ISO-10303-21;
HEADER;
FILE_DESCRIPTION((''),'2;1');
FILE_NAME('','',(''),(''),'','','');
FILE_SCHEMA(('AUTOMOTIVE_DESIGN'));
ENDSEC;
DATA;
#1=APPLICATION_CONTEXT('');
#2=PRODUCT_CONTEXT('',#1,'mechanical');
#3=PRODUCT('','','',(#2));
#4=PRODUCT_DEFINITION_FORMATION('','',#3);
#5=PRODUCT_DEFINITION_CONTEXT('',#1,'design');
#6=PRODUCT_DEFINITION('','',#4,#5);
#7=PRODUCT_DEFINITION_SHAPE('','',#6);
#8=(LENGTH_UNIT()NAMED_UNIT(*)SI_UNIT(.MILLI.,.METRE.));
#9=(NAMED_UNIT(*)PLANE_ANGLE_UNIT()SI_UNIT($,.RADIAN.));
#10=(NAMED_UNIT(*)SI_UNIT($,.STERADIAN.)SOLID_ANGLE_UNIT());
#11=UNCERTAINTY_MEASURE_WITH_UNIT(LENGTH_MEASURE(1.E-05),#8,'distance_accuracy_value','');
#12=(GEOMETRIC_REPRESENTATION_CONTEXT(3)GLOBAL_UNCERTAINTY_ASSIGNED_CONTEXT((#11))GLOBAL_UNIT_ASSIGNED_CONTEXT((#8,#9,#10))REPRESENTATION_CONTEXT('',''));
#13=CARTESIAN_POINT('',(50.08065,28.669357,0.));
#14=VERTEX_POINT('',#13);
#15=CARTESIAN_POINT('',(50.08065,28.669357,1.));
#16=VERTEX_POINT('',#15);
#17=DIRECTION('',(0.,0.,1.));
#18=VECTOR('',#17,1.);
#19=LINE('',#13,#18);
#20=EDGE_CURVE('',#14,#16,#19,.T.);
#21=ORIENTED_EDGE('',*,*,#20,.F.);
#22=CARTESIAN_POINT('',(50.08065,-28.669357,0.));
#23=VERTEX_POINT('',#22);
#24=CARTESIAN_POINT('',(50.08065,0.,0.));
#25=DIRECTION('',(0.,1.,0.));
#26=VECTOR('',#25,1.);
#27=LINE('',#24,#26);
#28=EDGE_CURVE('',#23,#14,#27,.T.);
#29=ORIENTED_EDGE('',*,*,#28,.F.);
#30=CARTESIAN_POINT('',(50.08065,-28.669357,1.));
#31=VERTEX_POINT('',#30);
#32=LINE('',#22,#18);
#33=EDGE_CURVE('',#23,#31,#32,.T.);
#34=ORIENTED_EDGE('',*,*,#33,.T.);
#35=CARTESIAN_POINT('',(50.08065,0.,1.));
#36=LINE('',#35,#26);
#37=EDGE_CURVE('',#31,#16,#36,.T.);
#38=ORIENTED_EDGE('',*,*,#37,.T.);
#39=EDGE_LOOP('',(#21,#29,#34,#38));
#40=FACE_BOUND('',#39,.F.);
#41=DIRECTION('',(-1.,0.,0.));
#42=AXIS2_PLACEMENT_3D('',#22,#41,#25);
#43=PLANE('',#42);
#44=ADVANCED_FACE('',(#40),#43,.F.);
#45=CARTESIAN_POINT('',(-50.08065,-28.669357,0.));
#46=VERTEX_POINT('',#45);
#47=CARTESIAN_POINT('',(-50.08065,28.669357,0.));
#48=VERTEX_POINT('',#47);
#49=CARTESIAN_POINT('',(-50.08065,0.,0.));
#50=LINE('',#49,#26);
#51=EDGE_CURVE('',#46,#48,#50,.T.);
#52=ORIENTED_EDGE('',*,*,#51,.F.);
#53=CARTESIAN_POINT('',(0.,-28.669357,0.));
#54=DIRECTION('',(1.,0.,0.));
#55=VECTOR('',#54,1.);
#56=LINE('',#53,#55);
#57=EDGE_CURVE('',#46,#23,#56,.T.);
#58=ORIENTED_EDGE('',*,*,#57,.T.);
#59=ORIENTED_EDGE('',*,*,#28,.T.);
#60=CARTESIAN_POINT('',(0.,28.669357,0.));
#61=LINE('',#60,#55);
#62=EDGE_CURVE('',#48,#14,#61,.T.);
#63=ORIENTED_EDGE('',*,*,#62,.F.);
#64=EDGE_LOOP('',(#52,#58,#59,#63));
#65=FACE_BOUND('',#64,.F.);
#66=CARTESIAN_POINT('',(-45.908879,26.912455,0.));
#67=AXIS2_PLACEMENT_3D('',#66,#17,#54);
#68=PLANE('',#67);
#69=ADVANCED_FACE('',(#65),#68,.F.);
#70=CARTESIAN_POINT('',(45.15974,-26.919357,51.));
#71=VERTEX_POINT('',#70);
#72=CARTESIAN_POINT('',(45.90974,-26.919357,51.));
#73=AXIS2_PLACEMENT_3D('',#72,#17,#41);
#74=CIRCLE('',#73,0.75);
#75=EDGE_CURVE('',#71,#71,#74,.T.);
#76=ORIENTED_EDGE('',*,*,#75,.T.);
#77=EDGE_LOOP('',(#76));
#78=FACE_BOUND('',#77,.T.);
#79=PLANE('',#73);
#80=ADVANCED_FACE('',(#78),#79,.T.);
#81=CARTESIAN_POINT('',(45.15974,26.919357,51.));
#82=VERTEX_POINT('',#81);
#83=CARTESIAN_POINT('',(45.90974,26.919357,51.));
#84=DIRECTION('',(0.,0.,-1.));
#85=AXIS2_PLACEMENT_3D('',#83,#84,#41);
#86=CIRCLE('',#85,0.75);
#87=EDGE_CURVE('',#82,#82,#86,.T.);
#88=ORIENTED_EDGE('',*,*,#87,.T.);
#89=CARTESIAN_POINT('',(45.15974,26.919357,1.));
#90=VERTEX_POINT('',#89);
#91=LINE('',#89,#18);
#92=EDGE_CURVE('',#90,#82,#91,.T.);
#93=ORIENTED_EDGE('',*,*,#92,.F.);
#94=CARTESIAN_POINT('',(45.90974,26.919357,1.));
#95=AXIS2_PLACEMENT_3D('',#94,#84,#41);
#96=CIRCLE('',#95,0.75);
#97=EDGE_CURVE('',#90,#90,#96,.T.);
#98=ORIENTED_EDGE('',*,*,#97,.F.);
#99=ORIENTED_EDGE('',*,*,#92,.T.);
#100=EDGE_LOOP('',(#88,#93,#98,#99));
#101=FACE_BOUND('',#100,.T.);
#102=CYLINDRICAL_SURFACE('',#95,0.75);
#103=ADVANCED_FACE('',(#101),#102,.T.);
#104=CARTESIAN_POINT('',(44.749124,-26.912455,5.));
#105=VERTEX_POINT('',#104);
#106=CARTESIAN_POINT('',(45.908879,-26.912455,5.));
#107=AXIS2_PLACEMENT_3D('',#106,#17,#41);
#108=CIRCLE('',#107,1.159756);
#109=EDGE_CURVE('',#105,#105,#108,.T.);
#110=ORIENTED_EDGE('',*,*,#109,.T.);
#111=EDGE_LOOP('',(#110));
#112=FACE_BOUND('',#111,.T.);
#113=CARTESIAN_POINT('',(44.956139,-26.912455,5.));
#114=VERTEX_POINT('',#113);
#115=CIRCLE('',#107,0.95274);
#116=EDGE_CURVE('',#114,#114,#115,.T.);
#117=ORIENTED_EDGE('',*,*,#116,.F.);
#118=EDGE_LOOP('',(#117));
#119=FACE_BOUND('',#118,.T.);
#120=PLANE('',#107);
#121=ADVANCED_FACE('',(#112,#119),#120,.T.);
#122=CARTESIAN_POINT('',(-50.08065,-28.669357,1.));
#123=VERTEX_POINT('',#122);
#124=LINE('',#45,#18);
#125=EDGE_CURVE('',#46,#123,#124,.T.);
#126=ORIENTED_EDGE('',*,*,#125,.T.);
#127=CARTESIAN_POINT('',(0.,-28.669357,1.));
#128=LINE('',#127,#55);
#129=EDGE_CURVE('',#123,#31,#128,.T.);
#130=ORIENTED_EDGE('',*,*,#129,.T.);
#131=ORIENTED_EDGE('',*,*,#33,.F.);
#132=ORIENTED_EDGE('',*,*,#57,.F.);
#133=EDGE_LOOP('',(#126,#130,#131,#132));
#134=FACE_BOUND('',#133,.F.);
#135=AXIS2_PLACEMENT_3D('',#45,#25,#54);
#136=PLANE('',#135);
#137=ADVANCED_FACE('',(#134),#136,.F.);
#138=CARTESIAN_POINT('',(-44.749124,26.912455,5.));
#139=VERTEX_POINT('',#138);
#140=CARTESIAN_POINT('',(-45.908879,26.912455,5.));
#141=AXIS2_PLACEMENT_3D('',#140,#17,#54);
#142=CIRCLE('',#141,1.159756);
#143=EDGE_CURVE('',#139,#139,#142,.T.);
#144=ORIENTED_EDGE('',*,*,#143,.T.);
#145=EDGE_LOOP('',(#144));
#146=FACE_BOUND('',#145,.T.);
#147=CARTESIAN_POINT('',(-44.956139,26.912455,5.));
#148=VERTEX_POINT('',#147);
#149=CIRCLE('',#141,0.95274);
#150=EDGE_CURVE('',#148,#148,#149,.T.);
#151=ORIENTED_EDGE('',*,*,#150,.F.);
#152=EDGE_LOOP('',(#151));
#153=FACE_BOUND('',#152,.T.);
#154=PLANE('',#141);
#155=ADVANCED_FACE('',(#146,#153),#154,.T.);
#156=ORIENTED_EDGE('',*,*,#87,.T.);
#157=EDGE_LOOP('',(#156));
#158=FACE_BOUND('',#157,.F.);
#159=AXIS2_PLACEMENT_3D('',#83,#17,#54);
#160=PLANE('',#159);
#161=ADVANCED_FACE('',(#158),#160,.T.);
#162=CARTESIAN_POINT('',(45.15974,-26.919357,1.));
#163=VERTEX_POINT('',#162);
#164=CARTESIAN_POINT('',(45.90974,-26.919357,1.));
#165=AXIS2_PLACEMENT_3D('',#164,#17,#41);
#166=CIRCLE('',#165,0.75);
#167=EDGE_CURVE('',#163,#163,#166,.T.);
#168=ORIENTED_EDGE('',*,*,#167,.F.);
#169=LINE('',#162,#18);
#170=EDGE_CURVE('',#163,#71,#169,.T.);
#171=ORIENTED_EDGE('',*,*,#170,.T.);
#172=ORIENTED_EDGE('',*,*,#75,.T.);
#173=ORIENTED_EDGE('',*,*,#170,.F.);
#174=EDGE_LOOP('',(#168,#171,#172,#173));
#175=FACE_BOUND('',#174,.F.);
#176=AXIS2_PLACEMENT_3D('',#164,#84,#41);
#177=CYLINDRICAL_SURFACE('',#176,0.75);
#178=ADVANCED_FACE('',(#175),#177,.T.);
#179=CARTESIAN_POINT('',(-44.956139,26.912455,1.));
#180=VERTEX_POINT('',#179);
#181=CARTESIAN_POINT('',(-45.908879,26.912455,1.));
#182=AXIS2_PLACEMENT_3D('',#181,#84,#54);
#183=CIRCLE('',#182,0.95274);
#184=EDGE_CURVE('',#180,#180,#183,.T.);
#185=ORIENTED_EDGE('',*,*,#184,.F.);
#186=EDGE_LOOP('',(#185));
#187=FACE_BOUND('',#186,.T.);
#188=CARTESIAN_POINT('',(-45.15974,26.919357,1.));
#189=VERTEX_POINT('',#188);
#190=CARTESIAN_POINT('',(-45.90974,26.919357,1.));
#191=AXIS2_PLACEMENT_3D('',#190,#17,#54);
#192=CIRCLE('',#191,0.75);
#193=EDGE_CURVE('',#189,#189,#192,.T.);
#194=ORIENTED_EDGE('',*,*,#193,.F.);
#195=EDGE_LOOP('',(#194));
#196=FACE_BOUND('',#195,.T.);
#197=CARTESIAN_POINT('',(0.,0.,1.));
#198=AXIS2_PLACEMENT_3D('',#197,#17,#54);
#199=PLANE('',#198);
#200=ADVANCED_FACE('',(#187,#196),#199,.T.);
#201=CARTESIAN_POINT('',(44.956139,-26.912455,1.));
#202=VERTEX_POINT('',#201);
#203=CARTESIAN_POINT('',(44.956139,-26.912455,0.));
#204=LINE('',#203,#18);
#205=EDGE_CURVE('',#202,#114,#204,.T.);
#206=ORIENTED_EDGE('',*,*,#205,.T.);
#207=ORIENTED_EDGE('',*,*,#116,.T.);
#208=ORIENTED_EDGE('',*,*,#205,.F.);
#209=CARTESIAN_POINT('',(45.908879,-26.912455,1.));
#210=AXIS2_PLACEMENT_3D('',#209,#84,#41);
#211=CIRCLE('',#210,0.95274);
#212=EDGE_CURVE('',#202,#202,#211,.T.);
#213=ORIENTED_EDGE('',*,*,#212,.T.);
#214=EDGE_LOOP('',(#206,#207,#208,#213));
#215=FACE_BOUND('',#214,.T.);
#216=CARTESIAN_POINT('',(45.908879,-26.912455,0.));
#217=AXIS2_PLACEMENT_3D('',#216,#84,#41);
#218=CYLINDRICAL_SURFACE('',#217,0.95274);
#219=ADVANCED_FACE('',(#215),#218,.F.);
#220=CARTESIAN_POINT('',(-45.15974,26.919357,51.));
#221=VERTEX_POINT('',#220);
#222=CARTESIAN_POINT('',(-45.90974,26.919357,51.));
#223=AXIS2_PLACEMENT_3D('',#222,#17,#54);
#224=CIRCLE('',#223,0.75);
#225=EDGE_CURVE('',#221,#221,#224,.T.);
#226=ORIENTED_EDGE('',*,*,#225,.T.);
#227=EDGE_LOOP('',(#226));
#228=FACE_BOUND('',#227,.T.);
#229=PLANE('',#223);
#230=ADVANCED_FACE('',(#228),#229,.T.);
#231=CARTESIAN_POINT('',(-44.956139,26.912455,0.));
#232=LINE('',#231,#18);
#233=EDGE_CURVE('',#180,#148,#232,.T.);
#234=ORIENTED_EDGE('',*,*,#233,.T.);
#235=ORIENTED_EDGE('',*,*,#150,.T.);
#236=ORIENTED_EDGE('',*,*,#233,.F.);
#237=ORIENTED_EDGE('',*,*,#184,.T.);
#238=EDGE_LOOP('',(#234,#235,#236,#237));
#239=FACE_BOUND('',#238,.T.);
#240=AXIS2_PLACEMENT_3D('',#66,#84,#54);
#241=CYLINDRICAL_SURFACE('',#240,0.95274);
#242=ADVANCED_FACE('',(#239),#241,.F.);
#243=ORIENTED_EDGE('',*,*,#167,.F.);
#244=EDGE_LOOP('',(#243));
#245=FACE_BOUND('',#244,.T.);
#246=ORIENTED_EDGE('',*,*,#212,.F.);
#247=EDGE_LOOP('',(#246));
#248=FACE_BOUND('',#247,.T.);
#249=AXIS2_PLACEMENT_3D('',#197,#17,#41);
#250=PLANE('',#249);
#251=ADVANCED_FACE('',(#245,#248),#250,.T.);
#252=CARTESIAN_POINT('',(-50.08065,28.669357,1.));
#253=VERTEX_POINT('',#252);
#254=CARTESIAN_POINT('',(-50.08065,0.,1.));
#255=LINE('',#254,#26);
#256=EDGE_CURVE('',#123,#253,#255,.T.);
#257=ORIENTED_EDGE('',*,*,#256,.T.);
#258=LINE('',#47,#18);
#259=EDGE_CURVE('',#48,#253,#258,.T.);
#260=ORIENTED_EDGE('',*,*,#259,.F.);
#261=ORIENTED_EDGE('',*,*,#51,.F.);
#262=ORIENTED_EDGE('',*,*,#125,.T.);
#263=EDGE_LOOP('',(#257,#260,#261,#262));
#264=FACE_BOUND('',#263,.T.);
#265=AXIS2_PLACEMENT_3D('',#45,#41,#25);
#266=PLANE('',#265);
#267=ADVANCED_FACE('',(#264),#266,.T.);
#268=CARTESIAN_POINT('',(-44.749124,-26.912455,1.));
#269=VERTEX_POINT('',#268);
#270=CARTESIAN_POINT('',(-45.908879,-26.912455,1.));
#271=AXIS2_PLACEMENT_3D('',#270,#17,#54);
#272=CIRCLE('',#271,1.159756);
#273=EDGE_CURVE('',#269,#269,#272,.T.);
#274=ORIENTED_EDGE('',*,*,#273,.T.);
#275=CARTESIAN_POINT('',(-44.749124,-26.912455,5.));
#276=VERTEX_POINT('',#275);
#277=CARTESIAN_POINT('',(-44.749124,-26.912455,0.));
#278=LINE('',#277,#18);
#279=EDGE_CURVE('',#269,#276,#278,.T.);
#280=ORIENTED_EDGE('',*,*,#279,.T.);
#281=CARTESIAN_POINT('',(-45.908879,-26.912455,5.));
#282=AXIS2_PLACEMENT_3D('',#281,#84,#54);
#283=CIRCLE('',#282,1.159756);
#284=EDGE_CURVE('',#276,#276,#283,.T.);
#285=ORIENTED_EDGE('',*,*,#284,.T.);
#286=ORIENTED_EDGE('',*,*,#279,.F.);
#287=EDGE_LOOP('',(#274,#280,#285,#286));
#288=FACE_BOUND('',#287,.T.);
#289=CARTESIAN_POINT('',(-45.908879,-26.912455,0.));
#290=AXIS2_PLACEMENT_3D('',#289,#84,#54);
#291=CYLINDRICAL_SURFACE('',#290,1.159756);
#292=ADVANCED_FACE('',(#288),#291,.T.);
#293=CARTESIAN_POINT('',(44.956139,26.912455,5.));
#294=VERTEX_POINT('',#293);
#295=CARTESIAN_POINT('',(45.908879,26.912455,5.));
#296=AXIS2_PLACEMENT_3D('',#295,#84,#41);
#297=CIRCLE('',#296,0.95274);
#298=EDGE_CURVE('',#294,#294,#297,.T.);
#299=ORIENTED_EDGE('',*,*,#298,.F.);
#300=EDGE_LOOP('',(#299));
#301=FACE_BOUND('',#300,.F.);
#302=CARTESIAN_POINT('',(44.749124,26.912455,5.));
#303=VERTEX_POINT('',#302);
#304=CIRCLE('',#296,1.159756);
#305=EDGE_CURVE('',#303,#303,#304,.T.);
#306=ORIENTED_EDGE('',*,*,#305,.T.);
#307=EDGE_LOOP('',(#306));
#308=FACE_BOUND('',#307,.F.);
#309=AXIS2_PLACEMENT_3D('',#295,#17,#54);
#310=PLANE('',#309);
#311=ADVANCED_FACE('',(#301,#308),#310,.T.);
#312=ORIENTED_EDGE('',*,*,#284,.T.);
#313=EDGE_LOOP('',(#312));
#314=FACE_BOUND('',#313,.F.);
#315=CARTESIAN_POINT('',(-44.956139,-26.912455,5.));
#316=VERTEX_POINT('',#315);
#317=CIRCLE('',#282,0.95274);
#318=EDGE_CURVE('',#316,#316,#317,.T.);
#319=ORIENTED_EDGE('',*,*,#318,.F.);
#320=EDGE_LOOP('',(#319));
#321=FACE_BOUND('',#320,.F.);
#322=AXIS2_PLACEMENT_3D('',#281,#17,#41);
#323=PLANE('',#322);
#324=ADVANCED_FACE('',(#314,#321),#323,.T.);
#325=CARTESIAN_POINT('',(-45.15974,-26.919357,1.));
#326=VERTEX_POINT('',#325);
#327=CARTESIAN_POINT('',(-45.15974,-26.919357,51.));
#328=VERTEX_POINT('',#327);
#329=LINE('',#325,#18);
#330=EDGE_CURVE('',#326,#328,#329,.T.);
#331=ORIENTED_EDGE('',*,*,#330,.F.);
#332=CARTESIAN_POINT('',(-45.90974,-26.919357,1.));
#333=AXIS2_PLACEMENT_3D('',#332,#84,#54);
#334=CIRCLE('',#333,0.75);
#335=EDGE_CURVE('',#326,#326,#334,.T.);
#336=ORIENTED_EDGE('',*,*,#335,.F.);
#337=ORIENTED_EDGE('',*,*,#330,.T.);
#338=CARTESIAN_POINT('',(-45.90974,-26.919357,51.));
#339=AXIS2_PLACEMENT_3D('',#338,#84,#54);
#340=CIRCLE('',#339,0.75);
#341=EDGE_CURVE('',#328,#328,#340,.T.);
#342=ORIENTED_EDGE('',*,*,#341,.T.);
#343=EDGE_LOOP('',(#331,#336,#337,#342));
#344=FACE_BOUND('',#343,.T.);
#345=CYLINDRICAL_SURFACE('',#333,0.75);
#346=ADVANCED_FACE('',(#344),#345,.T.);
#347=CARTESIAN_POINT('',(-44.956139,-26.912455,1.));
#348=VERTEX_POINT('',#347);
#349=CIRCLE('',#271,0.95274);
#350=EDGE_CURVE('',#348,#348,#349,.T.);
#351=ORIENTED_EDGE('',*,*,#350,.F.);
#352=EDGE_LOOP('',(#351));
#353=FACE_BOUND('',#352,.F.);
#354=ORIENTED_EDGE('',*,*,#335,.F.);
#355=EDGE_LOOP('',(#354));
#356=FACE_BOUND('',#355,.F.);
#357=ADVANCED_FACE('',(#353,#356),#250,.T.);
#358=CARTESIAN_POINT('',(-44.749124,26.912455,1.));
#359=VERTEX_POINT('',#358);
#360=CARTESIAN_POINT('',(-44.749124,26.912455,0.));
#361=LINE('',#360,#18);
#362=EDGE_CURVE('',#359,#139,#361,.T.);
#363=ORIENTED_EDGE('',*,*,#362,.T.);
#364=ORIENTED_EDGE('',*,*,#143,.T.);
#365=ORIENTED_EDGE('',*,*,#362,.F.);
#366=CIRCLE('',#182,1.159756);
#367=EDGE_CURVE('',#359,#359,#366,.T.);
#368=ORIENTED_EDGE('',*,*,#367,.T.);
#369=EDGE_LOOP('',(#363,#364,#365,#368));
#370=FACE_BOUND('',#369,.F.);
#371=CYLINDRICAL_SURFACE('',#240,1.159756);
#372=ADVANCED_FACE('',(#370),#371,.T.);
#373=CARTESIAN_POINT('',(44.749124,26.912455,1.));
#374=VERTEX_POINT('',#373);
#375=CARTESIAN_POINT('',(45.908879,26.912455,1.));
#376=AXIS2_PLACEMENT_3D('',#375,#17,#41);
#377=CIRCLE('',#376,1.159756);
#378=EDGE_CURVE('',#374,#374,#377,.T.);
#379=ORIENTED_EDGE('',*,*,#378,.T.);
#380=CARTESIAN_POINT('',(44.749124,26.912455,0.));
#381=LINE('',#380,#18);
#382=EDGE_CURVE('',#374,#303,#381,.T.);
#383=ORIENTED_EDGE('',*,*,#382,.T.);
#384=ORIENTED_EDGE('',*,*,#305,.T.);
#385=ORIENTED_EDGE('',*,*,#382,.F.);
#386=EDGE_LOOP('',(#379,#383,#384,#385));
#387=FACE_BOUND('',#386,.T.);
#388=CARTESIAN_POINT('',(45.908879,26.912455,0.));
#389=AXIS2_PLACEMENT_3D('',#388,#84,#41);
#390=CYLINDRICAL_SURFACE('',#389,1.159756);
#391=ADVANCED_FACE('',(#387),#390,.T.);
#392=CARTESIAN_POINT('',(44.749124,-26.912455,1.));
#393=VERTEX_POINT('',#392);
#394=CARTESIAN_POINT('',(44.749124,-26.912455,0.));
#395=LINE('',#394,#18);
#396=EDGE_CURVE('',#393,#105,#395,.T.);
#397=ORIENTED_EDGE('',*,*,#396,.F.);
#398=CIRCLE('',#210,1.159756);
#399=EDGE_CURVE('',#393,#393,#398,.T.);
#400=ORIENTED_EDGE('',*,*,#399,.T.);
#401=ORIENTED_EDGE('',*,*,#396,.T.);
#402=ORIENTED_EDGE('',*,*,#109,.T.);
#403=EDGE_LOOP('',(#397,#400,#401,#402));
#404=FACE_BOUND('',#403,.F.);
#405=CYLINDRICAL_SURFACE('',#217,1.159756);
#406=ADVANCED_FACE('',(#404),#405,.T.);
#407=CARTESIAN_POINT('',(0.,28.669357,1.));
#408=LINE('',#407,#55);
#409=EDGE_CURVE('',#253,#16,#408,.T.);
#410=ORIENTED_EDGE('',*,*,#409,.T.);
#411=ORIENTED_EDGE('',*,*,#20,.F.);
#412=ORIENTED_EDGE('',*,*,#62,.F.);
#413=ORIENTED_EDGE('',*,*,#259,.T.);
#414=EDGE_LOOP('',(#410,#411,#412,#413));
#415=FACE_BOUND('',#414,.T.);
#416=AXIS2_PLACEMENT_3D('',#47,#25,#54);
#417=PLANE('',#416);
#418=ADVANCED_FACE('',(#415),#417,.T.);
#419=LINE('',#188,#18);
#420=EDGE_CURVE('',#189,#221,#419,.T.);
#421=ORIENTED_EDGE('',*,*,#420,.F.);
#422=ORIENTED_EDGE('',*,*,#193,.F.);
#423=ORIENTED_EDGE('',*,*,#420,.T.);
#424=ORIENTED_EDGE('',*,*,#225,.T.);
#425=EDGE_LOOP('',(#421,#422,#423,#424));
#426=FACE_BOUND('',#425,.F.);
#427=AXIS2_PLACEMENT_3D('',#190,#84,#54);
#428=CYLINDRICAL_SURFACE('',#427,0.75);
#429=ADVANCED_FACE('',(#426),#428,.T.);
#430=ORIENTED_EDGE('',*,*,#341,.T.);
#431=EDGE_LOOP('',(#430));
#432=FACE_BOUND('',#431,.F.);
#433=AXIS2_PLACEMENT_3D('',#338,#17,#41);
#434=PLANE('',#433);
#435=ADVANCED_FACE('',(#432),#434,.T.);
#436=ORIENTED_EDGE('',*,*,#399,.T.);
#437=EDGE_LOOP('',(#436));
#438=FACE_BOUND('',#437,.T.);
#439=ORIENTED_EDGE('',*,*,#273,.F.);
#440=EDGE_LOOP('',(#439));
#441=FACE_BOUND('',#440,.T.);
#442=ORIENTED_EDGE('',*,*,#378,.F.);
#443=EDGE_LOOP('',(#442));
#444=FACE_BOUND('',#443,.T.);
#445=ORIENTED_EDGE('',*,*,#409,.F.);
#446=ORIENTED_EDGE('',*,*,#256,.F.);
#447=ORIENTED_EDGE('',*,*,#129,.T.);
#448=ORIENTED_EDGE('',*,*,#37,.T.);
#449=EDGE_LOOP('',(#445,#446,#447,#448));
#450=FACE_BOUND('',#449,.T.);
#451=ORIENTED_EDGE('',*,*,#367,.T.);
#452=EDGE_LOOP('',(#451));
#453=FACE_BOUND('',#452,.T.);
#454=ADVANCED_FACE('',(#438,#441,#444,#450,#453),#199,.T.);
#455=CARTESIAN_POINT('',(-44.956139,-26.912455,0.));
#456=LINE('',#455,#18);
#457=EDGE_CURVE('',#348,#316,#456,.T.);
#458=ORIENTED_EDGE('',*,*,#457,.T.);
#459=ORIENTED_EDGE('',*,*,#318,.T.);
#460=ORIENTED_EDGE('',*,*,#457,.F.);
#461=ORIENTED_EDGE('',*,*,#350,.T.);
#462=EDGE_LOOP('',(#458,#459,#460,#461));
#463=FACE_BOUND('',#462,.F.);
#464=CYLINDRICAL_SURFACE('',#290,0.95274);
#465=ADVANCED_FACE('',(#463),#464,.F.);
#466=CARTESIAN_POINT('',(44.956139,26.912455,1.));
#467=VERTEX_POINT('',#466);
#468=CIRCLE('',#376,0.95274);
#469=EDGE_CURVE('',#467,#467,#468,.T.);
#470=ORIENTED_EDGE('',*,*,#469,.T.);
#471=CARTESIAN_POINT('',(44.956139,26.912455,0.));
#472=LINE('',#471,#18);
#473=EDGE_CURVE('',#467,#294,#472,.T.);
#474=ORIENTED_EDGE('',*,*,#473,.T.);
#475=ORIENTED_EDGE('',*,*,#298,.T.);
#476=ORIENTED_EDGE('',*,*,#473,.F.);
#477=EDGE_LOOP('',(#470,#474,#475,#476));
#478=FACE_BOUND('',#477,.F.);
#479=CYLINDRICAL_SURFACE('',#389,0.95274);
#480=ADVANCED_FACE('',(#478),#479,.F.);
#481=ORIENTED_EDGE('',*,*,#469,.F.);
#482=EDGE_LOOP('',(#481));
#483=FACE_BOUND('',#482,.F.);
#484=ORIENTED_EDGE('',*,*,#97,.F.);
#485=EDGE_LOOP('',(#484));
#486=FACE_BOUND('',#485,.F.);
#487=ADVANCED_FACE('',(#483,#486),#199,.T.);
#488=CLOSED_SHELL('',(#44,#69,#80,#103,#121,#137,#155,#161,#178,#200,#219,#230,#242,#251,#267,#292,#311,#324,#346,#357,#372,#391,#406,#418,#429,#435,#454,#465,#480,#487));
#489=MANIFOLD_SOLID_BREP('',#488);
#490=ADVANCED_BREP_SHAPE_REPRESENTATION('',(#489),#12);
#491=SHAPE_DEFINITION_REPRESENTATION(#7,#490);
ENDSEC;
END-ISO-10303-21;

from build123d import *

# Parameters (mm, degrees)
F0_W     = 100.1612991095
F0_H     = 57.3387145996
F1_DEPTH = 1
F4_R     = 0.75
F5_DEPTH = 50
F6_R     = 1.159755705
F6_R_2   = 0.9527404517
F7_DEPTH = 5


# Not quite as in the source:
# - a feature names something its author has since deleted; it is built from what else it names


with BuildPart() as f1:
    # F0 (on Top) → F1 (new body)
    with BuildSketch(Plane.XY):
        Rectangle(F0_W, F0_H)
    extrude(amount=F1_DEPTH)

    # F4 (on face) → F5 (join)
    with BuildSketch(Plane.XY.offset(1)):
        with Locations((-45.9097400308, 26.9193572998)):
            Circle(F4_R)
    extrude(amount=F5_DEPTH)

    # F6 (on Top) → F7 (join)
    with BuildSketch(Plane.XY):
        with Locations((-45.9088794887, 26.9124545157)):
            Circle(F6_R)
        with Locations((-45.9088794887, 26.9124545157)):
            Circle(F6_R_2, mode=Mode.SUBTRACT)
    extrude(amount=F7_DEPTH)

    # F8: F1 across plane


with BuildPart() as f1_1:
    add(f1.part)
    add(f1.part.mirror(Plane.XZ))

    # F9: F1 across plane


with BuildPart() as f1_2:
    add(f1_1.part)
    add(f1_1.part.mirror(Plane.YZ))


solid = f1_2.part
